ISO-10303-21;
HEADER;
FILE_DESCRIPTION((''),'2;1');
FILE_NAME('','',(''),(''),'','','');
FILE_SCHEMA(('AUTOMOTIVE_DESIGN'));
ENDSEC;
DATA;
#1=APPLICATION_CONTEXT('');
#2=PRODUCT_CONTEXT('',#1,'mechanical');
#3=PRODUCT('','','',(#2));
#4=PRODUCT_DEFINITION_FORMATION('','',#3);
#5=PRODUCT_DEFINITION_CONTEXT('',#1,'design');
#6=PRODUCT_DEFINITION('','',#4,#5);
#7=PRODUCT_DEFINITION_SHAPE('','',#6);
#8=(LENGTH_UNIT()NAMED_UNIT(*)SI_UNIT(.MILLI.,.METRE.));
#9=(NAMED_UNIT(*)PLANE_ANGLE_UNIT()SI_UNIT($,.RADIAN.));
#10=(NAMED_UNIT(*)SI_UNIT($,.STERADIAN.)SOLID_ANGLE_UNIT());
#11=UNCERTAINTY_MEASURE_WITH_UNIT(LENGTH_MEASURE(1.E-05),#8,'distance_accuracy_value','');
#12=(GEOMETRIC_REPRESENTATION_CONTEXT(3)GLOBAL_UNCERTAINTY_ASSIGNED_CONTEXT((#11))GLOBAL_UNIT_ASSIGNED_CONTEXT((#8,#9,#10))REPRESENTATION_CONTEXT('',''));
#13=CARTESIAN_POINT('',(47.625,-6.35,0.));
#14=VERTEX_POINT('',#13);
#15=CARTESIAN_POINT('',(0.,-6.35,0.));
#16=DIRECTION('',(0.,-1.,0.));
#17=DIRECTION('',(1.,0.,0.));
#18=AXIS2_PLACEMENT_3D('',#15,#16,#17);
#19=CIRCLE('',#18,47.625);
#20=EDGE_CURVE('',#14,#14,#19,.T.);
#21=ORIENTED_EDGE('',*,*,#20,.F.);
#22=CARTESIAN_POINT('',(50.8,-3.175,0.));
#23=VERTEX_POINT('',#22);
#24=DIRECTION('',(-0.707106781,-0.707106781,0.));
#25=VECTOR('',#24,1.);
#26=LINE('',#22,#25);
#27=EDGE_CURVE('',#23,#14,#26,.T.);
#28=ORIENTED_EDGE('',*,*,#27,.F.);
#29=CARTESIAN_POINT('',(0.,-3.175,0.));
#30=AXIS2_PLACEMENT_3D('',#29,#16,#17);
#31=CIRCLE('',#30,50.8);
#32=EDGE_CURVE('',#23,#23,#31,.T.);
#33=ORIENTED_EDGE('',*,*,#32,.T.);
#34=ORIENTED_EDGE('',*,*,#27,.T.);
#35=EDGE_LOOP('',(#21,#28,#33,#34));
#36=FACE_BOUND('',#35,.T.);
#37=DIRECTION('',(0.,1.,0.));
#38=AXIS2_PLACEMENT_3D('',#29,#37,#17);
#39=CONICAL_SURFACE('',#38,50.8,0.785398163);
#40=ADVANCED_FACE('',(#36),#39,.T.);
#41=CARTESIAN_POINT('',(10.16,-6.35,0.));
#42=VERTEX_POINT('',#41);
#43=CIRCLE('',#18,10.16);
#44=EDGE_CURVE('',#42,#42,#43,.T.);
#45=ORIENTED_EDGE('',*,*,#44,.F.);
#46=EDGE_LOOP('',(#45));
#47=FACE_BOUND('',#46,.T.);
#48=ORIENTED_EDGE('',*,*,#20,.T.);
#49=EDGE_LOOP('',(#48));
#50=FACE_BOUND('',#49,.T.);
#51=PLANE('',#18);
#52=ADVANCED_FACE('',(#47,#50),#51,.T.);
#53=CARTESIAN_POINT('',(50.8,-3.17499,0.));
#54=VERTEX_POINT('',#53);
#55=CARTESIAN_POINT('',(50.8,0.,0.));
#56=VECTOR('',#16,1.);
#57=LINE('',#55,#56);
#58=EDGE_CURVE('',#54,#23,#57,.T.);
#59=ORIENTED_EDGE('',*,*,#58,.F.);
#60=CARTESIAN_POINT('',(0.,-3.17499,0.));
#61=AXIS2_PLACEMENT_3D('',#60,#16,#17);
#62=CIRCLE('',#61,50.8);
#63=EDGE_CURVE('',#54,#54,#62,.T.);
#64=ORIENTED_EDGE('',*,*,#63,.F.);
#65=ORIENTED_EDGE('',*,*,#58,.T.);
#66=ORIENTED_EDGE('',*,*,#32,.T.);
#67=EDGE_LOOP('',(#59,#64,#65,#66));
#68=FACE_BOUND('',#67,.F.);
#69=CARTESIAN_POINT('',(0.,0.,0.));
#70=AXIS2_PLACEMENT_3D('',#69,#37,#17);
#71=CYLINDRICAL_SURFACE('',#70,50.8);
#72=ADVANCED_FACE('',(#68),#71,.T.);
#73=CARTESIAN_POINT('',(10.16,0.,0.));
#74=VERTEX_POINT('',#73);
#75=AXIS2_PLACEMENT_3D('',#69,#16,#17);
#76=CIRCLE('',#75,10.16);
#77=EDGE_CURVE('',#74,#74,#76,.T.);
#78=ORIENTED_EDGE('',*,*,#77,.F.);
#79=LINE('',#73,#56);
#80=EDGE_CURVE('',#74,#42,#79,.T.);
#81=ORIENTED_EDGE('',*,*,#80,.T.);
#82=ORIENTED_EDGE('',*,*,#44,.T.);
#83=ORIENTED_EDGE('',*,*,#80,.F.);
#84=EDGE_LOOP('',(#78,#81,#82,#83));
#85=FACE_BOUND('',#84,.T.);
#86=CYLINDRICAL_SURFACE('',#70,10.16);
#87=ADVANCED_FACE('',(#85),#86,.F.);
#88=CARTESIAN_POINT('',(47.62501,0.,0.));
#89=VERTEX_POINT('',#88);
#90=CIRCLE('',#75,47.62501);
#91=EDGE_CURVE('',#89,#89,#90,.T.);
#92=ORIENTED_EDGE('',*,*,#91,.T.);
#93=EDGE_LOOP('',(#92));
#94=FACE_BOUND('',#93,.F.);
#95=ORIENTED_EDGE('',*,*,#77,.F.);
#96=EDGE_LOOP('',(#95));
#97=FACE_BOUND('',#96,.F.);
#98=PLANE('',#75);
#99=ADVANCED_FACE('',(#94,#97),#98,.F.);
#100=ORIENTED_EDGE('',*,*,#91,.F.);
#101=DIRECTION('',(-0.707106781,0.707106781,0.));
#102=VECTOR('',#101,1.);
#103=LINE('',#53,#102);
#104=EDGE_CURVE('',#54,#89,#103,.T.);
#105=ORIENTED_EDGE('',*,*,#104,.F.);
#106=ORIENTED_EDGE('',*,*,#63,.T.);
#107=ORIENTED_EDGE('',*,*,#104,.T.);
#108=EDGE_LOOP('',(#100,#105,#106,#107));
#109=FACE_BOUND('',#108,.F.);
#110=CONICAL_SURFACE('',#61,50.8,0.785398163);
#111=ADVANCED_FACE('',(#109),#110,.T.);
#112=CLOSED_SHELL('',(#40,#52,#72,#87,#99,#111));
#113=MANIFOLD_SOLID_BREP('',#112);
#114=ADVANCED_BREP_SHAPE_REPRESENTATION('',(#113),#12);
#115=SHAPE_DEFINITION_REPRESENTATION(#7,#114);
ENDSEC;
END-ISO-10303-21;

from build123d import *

# Parameters (mm, degrees)
F0_R     = 50.8
F0_R_2   = 10.16
F1_DEPTH = 6.35
F2_SIZE  = 3.175
F3_SIZE  = 3.17499


# Not quite as in the source:
# - a fillet or chamfer is up to 0.001 mm smaller than in the source, because OpenCascade refuses the exact size


with BuildPart() as f1:
    # F0 (on Front) → F1 (new body)
    with BuildSketch(Plane.XZ):
        Circle(F0_R)
        Circle(F0_R_2, mode=Mode.SUBTRACT)
    extrude(amount=F1_DEPTH)

    # F2
    f2_edges = [f1.edges().sort_by_distance(p)[0] for p in [
        (-50.8, -6.35, 0),
    ]]
    chamfer(f2_edges, length=F2_SIZE)

    # F3 (size 3.175 in the source; OpenCascade refuses exactly that, so slightly less here)
    f3_edges = [f1.edges().sort_by_distance(p)[0] for p in [
        (-50.8, 0, 0),
    ]]
    chamfer(f3_edges, length=F3_SIZE)


solid = f1.part
